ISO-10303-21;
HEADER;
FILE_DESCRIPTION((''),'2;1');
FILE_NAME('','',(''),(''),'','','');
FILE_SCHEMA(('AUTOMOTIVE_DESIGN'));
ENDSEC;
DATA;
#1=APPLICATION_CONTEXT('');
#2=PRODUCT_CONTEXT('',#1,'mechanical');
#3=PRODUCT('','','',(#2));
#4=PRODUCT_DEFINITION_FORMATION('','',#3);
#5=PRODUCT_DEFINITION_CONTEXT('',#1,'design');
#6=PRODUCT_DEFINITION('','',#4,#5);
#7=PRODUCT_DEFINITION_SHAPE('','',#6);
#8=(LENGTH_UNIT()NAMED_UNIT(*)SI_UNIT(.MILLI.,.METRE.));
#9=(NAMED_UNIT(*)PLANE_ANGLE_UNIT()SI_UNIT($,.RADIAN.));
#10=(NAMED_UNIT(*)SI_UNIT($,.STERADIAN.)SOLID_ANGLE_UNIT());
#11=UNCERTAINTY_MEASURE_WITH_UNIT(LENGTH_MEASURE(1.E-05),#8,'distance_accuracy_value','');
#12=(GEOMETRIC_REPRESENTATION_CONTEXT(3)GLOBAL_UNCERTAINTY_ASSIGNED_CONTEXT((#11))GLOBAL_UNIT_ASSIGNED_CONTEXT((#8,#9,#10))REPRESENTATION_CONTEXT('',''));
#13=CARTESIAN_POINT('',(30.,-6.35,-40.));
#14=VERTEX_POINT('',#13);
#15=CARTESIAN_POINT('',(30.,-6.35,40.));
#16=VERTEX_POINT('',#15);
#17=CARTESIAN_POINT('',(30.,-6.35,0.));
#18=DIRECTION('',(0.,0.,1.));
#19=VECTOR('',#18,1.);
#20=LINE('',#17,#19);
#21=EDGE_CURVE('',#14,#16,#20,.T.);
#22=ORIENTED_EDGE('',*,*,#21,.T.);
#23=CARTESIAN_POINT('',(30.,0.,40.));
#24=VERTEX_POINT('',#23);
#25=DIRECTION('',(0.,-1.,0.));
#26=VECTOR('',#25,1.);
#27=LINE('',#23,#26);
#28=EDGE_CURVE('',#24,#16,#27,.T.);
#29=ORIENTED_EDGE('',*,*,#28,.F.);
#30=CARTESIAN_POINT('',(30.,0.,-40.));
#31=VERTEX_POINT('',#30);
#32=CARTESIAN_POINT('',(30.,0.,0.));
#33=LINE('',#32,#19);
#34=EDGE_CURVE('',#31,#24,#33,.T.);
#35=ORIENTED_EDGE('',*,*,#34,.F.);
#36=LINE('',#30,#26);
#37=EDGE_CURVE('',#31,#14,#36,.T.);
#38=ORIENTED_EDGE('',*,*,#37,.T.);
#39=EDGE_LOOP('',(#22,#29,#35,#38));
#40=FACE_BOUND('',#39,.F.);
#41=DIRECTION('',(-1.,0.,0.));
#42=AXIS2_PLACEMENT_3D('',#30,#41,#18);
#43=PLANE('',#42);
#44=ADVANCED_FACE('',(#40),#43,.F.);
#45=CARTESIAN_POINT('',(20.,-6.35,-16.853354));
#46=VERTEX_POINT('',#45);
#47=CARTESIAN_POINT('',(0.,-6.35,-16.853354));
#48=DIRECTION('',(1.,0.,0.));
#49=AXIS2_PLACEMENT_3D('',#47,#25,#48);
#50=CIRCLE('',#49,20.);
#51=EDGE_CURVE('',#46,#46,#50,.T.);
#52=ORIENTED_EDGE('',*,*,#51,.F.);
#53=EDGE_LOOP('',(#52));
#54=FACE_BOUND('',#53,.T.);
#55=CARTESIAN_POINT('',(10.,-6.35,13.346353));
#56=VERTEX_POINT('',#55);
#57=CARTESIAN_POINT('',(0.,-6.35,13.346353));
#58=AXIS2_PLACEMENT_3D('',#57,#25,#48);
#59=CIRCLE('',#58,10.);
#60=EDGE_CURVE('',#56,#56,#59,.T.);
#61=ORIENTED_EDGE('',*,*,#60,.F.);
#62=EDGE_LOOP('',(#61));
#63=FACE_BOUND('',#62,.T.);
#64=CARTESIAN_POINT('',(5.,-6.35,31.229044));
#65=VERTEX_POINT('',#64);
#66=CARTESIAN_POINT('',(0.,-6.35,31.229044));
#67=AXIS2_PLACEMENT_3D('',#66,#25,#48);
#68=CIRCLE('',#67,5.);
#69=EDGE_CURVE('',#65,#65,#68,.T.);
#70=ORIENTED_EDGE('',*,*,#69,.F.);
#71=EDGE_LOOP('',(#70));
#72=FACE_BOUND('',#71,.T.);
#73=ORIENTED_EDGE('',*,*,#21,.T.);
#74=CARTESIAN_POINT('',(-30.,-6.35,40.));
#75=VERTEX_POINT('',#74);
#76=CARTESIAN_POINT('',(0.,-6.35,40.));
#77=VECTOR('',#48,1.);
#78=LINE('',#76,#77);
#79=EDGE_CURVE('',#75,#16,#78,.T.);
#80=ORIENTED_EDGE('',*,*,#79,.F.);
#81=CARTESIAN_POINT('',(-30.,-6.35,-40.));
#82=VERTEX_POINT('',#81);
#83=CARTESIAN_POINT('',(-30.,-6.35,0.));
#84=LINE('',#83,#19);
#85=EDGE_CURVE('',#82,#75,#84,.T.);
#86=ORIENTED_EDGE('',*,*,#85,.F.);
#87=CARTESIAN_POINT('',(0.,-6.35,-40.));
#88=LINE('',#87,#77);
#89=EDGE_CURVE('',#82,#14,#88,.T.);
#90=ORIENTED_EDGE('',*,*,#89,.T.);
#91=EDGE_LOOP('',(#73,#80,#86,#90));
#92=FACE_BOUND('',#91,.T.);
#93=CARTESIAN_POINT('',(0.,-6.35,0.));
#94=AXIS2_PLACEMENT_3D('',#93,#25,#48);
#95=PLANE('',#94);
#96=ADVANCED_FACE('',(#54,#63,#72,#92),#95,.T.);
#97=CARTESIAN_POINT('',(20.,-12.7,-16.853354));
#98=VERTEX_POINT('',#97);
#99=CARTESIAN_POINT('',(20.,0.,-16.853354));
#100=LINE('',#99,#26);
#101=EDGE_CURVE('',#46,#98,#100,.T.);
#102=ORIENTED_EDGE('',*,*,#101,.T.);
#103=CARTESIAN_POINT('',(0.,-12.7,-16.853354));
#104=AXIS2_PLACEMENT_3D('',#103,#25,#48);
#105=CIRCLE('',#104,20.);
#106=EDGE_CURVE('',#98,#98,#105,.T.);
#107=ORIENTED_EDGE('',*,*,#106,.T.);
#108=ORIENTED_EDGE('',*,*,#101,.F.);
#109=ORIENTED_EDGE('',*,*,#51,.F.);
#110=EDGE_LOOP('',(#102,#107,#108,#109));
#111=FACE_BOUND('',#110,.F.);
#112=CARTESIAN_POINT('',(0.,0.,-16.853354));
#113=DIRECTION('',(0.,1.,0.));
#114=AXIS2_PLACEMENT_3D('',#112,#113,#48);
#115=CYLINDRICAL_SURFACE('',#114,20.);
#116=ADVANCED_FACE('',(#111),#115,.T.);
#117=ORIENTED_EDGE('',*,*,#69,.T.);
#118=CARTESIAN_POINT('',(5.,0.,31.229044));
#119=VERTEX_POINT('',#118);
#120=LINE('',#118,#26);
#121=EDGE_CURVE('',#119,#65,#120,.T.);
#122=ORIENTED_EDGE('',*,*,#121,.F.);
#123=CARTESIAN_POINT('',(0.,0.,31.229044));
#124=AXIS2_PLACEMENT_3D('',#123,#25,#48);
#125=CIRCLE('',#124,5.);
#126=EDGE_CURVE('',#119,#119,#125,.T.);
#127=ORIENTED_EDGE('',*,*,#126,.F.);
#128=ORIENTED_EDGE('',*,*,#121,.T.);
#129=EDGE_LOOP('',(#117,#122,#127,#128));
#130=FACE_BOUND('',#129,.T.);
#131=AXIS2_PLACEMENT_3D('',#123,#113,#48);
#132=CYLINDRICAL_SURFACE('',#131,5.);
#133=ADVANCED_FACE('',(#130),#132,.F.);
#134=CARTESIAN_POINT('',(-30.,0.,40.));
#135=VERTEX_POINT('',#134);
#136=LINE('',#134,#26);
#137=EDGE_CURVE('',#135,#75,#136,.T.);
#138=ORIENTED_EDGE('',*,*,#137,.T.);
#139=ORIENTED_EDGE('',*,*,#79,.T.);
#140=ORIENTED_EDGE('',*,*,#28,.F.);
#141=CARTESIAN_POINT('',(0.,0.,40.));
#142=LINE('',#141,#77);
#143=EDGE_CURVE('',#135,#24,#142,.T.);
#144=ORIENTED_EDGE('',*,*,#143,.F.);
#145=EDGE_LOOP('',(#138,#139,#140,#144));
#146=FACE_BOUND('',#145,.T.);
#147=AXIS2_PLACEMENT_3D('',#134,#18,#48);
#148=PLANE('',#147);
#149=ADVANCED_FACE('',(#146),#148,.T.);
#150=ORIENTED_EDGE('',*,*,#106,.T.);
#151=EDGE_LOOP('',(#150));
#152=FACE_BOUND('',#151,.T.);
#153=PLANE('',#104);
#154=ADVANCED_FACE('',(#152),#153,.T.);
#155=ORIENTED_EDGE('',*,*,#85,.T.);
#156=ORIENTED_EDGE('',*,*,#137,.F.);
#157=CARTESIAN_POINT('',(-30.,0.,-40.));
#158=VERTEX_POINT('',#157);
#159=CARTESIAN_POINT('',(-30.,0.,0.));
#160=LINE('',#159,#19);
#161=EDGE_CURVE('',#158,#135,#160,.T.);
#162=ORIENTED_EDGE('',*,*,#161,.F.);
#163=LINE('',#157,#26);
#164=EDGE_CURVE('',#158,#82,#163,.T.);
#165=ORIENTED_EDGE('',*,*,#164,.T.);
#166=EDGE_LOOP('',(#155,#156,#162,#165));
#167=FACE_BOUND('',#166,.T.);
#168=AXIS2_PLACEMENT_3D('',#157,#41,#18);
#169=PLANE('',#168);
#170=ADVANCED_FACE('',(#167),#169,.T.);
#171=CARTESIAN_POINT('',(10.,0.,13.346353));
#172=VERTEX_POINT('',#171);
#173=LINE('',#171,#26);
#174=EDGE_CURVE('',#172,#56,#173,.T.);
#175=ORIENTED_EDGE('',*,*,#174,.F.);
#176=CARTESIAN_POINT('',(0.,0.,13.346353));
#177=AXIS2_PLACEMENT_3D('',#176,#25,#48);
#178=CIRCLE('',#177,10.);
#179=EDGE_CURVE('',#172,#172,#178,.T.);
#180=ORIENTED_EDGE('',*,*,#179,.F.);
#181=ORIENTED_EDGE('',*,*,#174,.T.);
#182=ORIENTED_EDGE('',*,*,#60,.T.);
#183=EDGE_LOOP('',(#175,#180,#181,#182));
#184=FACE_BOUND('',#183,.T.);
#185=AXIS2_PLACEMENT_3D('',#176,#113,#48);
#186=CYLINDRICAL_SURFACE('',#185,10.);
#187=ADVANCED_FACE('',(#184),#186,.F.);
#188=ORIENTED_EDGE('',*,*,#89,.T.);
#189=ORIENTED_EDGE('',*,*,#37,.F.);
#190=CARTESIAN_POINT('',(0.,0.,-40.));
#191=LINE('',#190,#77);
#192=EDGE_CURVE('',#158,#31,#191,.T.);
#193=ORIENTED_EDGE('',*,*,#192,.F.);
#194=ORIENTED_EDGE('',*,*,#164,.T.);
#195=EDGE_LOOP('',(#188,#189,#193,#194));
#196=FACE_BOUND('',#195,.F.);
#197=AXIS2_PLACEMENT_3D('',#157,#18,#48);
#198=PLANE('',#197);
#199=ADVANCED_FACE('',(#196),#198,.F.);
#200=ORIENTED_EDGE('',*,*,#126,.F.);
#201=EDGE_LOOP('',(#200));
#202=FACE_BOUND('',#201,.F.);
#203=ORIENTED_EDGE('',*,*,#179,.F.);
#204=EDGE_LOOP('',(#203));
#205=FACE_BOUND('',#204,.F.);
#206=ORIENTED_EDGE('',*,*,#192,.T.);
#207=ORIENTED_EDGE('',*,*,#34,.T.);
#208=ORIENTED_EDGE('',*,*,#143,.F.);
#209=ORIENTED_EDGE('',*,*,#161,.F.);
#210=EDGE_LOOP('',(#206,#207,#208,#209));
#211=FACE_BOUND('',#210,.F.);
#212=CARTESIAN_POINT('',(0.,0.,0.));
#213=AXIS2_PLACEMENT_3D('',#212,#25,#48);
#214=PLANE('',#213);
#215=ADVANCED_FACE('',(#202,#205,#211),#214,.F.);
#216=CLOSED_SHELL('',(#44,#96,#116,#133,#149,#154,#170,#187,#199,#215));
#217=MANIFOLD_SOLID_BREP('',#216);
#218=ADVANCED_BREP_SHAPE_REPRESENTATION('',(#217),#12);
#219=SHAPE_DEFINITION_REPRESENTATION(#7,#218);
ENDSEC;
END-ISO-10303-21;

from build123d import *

# Parameters (mm, degrees)
F0_W     = 60
F0_H     = 80
F0_R     = 20
F0_R_2   = 10
F0_R_3   = 5
F1_DEPTH = 6.35
F2_DEPTH = 12.7


# Not quite as in the source:
# - a feature names something its author has since deleted; it is built from what else it names


with BuildPart() as f1:
    # F0 (on Front) → F1 (new body)
    with BuildSketch(Plane.XZ):
        Rectangle(F0_W, F0_H)
        with Locations((0, -16.8533538189)):
            Circle(F0_R, mode=Mode.SUBTRACT)
        with Locations((0, 13.3463527084)):
            Circle(F0_R_2, mode=Mode.SUBTRACT)
        with Locations((0, 31.2290439901)):
            Circle(F0_R_3, mode=Mode.SUBTRACT)
    extrude(amount=F1_DEPTH)

    # F0 (on Front) → F2 (join)
    with BuildSketch(Plane.XZ):
        with Locations((0, -16.8533538189)):
            Circle(F0_R)
    extrude(amount=F2_DEPTH)


solid = f1.part
